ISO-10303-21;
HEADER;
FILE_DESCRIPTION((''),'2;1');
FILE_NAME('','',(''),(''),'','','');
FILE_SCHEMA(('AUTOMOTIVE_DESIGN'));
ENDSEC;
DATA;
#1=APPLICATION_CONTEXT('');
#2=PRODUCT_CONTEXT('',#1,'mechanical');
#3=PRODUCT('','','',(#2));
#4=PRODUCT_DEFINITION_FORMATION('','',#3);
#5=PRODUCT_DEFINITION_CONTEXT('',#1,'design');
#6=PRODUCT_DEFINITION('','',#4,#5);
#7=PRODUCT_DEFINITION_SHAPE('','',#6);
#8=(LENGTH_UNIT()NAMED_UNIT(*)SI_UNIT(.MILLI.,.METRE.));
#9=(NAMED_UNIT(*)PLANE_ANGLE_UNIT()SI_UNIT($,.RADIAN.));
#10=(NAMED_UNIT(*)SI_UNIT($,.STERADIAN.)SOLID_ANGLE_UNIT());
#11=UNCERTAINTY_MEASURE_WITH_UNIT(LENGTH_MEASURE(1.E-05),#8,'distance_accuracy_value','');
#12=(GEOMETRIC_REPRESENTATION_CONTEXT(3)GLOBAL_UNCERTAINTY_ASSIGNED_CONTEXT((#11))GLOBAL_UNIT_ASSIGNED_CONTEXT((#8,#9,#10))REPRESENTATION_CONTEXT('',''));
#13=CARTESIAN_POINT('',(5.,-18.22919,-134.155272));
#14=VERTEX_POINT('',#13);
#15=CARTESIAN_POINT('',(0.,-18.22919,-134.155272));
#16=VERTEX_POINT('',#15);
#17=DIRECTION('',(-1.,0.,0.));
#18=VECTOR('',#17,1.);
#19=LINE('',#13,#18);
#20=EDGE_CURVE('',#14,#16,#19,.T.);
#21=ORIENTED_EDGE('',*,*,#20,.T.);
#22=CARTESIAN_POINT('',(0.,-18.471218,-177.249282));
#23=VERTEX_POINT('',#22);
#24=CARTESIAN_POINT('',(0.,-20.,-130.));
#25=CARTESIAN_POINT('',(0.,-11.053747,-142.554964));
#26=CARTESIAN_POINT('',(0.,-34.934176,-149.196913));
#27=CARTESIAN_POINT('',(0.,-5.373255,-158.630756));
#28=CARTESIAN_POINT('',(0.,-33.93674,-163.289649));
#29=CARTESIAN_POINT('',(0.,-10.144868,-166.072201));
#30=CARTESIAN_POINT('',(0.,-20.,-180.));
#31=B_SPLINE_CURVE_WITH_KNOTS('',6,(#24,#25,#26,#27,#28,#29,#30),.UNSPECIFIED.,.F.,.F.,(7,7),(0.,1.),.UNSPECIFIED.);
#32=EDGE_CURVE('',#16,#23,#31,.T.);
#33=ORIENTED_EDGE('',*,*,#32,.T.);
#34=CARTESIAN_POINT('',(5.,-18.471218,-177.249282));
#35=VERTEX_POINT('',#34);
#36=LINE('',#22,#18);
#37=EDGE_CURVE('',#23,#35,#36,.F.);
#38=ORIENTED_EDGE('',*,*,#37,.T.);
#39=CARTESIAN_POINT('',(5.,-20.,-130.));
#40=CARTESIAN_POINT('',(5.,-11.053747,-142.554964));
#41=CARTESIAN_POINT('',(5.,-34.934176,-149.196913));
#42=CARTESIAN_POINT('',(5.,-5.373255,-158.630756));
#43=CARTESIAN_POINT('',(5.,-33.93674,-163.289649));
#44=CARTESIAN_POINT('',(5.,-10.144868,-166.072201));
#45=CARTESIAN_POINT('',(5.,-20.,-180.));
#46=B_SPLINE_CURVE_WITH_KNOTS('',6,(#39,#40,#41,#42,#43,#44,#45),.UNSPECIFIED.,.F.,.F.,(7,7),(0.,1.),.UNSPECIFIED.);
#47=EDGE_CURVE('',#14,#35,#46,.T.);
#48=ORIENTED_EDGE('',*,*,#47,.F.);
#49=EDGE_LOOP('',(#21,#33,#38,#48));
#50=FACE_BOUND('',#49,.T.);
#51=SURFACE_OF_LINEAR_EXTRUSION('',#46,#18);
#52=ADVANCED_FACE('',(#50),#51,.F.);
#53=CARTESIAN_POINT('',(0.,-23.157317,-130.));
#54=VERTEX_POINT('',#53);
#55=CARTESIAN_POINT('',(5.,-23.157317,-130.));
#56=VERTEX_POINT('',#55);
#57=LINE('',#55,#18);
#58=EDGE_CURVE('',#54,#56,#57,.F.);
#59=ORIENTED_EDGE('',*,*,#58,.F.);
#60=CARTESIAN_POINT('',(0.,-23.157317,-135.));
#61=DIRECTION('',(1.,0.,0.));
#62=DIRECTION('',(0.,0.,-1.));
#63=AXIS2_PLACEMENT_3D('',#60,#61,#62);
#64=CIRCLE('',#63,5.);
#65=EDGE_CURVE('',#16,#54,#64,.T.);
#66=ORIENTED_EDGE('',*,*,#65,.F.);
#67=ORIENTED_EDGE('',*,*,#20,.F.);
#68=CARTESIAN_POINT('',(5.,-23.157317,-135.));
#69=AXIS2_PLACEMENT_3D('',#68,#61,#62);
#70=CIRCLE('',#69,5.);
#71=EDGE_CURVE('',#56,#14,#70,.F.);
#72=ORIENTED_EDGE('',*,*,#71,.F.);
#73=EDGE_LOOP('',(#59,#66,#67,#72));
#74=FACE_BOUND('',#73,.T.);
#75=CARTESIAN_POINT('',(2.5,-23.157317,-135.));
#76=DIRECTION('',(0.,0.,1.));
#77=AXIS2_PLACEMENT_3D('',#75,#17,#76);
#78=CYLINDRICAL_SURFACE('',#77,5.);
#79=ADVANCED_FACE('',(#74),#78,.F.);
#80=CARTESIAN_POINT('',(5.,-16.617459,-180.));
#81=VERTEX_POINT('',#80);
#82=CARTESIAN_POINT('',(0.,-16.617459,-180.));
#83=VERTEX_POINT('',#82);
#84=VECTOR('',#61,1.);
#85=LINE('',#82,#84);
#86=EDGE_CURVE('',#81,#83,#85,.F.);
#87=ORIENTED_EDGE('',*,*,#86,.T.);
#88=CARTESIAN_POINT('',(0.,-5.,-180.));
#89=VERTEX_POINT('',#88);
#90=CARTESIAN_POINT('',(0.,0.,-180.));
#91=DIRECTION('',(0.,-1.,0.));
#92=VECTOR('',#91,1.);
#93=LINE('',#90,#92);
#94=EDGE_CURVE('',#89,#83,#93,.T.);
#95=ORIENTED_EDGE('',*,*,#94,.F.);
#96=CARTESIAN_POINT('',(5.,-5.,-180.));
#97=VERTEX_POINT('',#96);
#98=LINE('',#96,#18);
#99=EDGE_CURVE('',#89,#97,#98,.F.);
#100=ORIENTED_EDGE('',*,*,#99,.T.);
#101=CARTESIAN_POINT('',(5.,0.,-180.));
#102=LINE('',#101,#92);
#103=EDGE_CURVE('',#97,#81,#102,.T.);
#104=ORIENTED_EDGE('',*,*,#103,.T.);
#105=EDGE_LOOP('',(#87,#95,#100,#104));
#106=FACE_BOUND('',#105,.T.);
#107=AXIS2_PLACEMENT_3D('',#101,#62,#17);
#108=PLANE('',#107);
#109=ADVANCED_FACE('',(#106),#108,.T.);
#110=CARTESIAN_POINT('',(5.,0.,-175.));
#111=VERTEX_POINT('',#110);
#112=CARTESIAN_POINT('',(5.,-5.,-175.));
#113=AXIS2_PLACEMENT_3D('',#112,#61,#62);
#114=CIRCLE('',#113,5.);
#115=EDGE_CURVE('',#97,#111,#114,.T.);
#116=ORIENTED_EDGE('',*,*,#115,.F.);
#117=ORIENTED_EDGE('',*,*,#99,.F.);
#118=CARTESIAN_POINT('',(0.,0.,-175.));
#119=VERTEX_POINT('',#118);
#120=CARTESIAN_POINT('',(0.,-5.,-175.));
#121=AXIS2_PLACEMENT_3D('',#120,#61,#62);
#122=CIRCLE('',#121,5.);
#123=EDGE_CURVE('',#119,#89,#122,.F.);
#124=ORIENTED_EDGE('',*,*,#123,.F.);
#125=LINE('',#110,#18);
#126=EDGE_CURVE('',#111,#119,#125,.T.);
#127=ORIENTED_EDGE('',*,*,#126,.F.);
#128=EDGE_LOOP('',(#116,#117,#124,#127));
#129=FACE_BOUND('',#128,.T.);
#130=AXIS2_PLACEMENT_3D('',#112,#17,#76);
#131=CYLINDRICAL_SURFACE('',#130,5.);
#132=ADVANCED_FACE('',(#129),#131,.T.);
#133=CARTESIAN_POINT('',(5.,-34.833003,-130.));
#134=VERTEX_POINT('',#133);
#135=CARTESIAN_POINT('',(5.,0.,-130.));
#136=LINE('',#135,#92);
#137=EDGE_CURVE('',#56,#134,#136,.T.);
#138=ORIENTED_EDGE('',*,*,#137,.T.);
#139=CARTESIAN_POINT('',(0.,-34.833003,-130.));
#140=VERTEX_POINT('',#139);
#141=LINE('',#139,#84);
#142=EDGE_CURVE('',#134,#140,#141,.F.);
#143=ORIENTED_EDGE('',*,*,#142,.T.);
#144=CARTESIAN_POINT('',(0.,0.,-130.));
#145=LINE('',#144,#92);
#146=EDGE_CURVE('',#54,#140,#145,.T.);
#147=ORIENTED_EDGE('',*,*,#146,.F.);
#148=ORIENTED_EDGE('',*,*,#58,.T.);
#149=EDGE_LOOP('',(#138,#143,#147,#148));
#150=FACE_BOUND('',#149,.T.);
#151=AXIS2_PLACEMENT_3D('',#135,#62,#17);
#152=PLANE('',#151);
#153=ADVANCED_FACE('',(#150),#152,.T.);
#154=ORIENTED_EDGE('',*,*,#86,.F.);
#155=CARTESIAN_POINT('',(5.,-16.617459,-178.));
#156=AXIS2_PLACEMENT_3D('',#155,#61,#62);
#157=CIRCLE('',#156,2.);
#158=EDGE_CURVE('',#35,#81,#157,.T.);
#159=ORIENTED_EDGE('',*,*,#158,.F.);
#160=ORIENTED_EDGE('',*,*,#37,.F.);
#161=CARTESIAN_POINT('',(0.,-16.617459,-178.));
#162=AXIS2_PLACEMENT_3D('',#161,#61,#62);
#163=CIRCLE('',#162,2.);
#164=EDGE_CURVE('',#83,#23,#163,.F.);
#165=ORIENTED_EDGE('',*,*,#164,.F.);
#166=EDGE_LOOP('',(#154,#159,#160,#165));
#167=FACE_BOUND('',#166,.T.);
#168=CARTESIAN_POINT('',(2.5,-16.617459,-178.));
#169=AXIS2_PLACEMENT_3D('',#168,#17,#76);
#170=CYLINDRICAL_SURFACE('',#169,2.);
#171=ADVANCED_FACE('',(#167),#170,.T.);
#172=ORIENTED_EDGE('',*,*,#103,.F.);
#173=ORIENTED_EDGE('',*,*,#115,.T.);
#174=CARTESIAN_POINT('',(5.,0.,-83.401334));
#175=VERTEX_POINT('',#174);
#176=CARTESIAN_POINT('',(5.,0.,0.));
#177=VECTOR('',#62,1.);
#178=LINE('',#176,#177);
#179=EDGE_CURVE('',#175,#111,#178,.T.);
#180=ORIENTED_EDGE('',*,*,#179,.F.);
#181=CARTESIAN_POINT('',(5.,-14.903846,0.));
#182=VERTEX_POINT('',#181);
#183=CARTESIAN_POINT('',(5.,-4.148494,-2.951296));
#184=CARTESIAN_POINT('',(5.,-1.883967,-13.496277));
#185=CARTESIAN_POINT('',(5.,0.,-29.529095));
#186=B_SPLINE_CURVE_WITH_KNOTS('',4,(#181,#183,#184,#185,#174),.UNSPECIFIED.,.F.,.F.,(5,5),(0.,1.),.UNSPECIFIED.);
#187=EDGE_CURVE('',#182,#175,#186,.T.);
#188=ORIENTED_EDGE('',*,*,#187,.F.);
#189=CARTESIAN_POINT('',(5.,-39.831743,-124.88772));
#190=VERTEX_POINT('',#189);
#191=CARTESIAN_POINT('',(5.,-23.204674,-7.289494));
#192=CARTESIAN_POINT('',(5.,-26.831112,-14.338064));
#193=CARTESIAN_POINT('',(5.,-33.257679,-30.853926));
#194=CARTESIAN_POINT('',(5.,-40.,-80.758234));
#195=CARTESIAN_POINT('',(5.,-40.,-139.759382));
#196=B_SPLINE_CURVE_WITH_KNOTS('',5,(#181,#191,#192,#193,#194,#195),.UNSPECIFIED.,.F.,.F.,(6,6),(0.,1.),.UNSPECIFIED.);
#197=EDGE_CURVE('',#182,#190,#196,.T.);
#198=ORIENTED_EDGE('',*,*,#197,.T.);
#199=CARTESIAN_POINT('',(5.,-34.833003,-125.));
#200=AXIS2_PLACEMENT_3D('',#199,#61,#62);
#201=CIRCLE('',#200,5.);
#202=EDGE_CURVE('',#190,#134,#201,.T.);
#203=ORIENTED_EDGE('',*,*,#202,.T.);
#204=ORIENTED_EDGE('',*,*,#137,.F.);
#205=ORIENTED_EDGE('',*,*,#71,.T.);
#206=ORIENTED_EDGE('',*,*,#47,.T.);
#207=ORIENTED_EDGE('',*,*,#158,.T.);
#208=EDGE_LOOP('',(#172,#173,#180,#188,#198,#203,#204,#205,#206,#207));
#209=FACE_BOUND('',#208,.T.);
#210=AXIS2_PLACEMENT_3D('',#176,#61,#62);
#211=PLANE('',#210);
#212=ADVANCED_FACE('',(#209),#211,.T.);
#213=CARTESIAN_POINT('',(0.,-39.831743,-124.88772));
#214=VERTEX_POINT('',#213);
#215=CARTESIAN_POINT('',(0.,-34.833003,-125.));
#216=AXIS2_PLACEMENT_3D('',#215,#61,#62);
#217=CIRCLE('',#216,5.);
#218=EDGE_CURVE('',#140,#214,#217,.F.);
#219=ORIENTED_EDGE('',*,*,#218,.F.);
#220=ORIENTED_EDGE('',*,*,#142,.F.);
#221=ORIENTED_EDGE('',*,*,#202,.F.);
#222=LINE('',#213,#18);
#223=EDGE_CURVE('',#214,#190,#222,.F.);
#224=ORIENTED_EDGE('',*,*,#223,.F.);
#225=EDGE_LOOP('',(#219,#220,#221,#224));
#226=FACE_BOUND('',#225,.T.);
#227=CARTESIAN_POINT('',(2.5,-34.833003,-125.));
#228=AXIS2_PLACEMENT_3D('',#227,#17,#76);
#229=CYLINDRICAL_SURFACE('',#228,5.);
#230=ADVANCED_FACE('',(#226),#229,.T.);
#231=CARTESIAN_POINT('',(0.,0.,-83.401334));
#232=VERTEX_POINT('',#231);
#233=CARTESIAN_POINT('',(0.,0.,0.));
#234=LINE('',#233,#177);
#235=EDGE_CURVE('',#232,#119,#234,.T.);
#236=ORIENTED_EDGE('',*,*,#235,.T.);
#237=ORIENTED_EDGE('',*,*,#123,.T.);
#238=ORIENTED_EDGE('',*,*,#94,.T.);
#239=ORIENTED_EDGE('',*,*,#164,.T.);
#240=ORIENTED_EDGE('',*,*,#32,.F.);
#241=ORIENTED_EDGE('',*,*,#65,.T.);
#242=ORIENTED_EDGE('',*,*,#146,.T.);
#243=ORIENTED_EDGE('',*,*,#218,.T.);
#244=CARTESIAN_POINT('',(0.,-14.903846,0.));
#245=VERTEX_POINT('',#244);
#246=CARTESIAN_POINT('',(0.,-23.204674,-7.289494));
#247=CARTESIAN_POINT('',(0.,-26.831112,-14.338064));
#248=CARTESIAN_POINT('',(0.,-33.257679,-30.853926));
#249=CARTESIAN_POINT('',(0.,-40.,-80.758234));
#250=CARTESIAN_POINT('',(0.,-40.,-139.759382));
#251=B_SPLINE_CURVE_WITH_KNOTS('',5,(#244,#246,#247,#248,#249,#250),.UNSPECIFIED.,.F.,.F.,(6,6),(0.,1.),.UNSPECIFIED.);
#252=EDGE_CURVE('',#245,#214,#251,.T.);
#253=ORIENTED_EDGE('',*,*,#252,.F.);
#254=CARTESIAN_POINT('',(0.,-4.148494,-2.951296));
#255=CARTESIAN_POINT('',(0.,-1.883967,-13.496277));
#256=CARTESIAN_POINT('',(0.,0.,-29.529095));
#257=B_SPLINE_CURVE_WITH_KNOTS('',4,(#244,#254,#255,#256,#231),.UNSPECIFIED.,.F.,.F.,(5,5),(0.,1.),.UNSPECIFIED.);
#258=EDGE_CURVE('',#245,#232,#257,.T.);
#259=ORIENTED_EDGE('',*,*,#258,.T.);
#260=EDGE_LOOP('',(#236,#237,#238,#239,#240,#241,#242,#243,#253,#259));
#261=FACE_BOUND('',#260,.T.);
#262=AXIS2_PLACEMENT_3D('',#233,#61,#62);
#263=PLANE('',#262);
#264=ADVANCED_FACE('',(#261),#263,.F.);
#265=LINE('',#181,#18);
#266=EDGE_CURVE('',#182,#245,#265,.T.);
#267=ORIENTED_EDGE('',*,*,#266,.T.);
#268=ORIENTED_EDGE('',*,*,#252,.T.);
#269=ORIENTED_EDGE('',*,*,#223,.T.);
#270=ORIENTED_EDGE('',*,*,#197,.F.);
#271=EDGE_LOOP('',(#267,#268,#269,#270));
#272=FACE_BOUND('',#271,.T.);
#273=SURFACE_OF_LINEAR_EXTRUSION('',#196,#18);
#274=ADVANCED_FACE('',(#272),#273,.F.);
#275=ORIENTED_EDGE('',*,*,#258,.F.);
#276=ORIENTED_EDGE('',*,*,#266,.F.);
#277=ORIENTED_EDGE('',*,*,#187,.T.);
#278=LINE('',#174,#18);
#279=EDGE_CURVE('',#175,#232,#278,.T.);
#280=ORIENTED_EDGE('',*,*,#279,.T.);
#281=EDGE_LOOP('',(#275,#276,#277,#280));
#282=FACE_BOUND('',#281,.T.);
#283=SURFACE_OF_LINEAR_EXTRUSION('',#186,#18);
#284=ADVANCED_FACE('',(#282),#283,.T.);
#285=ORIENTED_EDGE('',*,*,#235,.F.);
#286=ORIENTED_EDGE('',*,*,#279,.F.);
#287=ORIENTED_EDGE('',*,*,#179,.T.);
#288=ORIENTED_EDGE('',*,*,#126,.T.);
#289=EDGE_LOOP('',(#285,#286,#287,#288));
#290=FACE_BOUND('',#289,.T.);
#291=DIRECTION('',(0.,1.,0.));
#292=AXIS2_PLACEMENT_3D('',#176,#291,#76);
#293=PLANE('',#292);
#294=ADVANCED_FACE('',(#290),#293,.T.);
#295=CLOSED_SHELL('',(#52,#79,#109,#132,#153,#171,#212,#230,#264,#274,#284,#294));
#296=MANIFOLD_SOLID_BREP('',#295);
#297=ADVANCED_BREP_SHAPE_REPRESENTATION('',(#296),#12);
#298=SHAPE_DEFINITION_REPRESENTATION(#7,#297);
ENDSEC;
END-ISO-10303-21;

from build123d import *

# Parameters (mm, degrees)
EXTRUDE_1_DEPTH = 5
FILLET_6_R      = 5
FILLET_7_R      = 2
FILLET_8_R      = 5


# Read off the part's stored shape, not the designer's step: 凸台-拉伸1
with BuildPart() as part:
    # 凸台-拉伸1 outline → 凸台-拉伸1 (new body)
    with BuildSketch(Plane(origin=(0, 0, 0), x_dir=(0, 0, -1), z_dir=(1, 0, 0))):
        with BuildLine():
            add(Edge.make_bspline(
                [(0, -14.903846424), (2.951295662, -4.14849373), (13.496276672, -1.883966721), (29.52909514, 0), (83.401333812, 0)],
                knots=[0, 0, 0, 0, 0, 1, 1, 1, 1, 1], degree=4))
            add(Edge.make_bspline(
                [(0, -14.903846424), (7.045609734, -22.926953025), (13.86614676, -26.583220196), (29.227640995, -32.621761678), (74.300319088, -39.100169059), (130, -39.92714285)],
                knots=[0, 0, 0, 0, 0, 0, 0.966542999, 0.966542999, 0.966542999, 0.966542999, 0.966542999, 0.966542999], degree=5))
            Line((130, -39.92714285), (130, -20))
            add(Edge.make_bspline(
                [(130, -20), (142.554964398, -11.053747082), (149.196912904, -34.934175524), (158.630756241, -5.373255264), (163.289648635, -33.936740498), (166.072200522, -10.144868391), (180, -20)],
                knots=[0, 0, 0, 0, 0, 0, 0, 1, 1, 1, 1, 1, 1, 1], degree=6))
            Line((180, -20), (180, 0))
            Line((180, 0), (83.401333812, 0))
        make_face()
    extrude(amount=EXTRUDE_1_DEPTH)

    # 圆角6
    fillet_6_edges = [part.edges().sort_by_distance(p)[0] for p in [
        (2.5, -20, -130),
    ]]
    fillet(fillet_6_edges, radius=FILLET_6_R)

    # 圆角7
    fillet_7_edges = [part.edges().sort_by_distance(p)[0] for p in [
        (2.5, -20, -180),
    ]]
    fillet(fillet_7_edges, radius=FILLET_7_R)

    # 圆角8
    fillet_8_edges = [part.edges().sort_by_distance(p)[0] for p in [
        (2.5, 0, -180),
        (2.5, -39.92714285, -130),
    ]]
    fillet(fillet_8_edges, radius=FILLET_8_R)


solid = part.part
